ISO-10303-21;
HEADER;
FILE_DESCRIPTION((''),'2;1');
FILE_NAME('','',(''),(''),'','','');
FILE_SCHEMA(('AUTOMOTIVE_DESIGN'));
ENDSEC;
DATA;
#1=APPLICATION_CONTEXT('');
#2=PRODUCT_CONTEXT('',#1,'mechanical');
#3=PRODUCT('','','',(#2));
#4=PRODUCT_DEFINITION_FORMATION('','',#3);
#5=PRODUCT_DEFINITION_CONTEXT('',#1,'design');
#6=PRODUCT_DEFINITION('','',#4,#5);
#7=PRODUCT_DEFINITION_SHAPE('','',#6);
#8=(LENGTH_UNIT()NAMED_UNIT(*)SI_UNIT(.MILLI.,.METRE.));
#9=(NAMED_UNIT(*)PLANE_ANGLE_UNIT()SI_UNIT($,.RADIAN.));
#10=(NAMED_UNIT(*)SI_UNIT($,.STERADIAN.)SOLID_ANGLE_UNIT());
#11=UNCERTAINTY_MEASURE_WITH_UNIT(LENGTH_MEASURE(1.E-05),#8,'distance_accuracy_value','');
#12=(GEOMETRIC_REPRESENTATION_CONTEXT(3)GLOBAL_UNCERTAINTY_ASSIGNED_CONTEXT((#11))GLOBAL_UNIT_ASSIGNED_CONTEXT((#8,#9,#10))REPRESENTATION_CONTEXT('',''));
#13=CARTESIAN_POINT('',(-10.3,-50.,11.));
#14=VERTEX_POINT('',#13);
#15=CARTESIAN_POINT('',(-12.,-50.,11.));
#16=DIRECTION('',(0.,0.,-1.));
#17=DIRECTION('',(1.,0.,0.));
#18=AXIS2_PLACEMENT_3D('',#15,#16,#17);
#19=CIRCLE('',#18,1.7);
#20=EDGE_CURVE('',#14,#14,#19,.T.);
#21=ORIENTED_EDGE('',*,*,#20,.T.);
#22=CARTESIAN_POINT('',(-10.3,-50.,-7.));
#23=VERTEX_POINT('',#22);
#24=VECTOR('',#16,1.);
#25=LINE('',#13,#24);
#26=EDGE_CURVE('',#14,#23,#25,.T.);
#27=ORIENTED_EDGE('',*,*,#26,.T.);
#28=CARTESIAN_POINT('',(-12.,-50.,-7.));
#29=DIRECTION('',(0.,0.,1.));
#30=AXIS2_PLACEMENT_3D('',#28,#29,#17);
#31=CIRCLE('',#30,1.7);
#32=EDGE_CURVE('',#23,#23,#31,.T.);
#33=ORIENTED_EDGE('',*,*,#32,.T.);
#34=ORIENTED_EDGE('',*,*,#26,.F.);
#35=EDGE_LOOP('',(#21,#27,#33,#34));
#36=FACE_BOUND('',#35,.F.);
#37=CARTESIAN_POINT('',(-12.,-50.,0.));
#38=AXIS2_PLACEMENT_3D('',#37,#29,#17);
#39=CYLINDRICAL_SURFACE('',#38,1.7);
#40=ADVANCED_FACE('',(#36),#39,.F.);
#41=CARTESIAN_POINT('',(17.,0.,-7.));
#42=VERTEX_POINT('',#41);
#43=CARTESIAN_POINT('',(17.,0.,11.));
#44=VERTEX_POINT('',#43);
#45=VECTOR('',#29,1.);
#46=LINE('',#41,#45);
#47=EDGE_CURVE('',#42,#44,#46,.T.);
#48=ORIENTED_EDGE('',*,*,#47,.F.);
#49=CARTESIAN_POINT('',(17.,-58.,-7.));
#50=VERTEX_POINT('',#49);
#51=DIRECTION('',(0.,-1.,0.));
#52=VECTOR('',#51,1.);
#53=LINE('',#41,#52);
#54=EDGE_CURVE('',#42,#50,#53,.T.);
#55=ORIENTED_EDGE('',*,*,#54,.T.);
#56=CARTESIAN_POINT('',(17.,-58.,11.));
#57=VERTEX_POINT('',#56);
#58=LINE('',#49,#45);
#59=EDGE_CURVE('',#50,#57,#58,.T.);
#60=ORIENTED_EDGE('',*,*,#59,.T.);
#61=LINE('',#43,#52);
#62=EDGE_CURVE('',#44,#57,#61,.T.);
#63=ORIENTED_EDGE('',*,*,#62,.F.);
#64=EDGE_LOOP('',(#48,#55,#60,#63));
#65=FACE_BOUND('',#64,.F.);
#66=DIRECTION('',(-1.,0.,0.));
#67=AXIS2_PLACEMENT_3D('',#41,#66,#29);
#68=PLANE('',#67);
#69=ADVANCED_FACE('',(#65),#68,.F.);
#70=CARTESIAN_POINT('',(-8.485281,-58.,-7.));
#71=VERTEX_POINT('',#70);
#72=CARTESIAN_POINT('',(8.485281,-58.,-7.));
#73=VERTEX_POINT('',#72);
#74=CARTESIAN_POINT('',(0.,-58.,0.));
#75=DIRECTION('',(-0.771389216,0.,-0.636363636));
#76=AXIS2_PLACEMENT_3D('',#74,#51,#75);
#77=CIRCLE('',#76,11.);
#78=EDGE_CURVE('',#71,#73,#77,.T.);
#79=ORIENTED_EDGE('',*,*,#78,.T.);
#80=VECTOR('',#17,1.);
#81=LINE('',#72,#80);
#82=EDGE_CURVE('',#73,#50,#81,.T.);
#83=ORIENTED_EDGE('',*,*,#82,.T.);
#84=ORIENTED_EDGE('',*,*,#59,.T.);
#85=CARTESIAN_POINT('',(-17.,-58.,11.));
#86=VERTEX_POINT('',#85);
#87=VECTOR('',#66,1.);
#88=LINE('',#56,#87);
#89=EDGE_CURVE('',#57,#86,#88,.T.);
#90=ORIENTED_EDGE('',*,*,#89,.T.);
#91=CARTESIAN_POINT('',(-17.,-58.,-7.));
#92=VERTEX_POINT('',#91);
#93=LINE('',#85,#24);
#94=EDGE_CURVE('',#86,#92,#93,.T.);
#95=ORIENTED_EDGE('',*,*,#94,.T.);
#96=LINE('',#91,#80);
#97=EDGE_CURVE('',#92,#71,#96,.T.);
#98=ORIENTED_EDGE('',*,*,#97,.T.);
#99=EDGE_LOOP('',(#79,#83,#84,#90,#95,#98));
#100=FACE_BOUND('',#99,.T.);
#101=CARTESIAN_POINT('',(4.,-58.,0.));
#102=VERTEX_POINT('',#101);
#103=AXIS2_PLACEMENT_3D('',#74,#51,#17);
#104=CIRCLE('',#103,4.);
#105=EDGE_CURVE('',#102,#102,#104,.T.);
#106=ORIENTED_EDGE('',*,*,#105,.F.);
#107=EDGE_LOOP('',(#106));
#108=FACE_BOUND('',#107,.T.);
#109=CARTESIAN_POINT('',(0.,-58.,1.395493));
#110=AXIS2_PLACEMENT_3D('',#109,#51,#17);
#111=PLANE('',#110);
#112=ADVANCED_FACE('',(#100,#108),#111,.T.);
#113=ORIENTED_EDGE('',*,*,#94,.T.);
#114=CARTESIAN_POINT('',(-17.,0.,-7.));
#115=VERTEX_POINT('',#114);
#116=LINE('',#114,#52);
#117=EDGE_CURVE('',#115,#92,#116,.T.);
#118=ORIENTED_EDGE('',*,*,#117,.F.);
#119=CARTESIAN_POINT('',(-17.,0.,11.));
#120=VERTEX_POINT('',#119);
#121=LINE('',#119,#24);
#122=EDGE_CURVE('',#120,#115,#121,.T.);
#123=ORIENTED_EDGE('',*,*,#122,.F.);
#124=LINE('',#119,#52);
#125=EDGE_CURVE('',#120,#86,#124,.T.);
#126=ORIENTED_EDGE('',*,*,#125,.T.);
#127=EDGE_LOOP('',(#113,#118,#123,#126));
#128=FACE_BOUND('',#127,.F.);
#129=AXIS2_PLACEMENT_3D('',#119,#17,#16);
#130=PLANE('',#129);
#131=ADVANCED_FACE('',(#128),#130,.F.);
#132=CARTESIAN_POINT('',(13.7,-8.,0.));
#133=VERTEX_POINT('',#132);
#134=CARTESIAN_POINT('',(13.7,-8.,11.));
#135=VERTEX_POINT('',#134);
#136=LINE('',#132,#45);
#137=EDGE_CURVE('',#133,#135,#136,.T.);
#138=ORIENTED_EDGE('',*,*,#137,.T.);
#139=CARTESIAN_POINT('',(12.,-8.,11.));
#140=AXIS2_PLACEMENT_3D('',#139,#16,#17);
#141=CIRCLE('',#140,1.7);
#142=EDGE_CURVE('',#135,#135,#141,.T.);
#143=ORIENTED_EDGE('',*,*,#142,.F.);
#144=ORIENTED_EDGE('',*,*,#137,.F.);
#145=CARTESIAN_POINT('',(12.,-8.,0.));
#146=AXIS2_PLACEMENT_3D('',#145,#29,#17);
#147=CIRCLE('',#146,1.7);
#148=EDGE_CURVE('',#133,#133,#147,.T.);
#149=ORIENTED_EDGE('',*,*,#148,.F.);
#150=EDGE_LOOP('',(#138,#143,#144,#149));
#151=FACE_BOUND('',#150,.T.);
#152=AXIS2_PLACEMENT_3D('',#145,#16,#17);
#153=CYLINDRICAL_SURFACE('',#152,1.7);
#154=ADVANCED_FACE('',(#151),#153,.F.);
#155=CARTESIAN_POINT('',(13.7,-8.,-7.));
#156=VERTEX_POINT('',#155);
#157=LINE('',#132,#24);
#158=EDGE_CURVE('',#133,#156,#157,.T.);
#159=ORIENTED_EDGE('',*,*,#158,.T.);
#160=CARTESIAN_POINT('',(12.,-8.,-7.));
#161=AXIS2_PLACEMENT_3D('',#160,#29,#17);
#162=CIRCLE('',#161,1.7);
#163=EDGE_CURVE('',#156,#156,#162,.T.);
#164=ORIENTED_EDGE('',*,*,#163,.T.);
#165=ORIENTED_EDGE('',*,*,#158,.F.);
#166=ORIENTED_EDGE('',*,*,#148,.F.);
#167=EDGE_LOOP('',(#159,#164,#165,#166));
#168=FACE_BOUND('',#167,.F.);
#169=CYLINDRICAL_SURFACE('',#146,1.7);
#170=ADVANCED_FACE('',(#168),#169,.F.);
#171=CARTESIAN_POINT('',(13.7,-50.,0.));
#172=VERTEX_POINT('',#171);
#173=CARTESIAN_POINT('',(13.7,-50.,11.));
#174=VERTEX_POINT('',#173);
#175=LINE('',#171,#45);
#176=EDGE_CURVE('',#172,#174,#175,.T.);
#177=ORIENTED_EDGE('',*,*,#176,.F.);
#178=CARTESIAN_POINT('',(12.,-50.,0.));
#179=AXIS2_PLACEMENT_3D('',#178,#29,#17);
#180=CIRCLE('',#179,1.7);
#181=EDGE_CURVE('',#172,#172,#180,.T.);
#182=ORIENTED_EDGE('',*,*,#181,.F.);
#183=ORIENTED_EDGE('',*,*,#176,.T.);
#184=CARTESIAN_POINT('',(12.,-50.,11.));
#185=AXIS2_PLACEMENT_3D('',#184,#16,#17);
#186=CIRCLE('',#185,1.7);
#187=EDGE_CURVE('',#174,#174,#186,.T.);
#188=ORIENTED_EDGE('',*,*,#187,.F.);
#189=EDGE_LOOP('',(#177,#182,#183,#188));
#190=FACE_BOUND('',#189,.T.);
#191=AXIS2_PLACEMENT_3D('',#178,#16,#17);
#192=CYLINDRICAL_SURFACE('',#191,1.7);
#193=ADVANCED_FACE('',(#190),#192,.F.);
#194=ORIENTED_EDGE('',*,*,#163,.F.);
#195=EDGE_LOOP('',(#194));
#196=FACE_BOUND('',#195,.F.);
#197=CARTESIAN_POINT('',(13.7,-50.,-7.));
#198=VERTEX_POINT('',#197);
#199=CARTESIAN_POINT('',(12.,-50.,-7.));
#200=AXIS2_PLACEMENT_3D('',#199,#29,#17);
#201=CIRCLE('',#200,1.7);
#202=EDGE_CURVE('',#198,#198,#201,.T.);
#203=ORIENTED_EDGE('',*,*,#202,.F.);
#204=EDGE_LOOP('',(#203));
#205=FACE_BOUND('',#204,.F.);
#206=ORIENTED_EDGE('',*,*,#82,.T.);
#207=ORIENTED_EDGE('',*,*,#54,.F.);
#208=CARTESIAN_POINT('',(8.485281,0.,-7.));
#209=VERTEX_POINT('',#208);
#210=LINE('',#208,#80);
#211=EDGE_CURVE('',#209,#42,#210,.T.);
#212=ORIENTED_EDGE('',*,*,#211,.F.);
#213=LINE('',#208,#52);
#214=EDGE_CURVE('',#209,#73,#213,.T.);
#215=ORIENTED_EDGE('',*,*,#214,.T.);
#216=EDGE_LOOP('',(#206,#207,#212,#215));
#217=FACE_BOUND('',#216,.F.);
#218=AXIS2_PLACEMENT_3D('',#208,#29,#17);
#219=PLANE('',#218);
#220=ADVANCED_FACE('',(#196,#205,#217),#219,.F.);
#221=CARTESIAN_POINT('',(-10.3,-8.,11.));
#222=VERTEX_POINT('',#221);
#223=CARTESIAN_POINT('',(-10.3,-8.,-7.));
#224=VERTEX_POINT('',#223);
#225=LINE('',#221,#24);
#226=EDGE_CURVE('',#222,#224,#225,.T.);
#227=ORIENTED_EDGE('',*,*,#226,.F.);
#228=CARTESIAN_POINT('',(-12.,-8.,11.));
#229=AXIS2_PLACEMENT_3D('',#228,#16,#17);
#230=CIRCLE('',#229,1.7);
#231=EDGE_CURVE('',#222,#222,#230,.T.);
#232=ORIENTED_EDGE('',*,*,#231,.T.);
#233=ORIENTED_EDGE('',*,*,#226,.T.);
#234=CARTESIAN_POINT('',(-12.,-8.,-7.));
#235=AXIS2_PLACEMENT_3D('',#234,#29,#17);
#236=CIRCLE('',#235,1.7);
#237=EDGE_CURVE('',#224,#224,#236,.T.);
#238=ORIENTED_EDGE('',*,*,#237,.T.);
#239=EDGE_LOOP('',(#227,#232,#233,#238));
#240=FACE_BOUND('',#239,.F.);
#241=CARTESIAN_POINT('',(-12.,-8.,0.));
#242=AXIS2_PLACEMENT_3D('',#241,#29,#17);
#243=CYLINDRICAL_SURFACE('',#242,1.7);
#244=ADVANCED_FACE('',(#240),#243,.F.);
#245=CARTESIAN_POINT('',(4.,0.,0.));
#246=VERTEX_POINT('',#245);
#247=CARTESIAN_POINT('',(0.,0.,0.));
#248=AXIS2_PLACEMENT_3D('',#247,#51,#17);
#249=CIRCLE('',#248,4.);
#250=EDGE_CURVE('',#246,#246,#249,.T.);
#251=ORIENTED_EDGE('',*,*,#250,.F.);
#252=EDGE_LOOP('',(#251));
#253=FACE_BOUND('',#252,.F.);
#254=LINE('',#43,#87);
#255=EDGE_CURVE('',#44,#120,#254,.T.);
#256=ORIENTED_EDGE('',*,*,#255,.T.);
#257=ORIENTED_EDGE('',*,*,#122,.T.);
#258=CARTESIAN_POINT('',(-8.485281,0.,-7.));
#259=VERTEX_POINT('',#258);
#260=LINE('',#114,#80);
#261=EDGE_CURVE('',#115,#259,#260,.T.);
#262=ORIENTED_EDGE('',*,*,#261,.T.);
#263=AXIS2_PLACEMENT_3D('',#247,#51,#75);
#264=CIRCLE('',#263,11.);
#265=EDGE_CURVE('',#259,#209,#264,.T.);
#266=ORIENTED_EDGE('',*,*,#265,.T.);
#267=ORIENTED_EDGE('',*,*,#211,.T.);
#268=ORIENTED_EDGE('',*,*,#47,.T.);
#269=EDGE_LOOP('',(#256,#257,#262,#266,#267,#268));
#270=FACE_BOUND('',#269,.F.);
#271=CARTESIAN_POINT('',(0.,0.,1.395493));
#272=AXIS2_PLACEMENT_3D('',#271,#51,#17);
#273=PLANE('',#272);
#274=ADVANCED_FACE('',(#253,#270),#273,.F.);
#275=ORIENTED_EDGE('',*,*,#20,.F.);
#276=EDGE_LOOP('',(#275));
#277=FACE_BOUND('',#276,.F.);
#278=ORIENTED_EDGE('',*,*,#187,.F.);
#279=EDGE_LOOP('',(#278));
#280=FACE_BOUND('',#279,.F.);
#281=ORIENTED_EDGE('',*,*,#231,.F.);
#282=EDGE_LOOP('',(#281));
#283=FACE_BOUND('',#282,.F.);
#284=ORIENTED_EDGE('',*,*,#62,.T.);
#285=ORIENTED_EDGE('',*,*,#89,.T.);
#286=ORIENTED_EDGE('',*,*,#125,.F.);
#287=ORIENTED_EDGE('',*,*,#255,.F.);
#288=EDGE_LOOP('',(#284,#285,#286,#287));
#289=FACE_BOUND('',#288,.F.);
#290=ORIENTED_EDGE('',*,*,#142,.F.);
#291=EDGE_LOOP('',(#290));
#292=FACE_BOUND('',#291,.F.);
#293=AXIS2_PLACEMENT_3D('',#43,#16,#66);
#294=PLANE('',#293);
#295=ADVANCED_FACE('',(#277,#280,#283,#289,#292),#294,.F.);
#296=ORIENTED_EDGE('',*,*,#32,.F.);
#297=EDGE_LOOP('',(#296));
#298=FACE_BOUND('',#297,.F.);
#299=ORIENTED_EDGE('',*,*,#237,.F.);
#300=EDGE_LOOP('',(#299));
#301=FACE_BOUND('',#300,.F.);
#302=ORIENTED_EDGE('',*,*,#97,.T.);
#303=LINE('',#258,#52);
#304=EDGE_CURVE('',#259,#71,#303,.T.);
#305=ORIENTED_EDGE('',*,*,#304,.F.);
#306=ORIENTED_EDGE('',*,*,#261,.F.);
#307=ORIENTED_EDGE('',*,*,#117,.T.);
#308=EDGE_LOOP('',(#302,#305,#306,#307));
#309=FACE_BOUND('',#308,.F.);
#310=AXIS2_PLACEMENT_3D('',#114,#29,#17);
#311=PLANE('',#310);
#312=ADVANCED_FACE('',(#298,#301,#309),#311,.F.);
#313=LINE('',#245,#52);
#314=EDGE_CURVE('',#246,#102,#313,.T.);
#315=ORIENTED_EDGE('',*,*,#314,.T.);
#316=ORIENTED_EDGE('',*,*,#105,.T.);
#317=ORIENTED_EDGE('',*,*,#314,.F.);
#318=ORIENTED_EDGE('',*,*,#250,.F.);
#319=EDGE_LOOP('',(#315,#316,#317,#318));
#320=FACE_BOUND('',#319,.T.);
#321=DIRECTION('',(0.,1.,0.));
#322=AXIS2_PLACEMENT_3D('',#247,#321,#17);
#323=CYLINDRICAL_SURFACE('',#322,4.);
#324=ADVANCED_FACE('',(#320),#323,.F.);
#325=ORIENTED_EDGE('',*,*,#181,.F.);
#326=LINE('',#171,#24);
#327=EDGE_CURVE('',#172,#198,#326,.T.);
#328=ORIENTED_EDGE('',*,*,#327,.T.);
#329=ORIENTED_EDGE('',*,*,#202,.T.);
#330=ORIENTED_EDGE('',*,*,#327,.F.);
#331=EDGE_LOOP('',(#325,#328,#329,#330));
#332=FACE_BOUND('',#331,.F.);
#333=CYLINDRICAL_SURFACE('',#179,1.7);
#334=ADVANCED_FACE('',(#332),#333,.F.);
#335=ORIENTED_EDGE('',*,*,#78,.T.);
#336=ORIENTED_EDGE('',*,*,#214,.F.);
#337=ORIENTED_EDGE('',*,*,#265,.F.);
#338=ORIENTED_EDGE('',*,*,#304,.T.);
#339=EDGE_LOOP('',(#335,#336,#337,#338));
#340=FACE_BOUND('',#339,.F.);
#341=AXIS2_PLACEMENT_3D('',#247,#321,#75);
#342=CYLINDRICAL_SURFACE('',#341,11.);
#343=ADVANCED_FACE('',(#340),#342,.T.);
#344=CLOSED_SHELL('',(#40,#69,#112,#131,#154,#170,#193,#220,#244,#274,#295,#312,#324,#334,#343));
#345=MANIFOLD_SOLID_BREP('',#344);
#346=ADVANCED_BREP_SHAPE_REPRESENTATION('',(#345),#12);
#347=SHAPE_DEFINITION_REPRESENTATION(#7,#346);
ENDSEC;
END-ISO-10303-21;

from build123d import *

# Parameters (mm, degrees)
F0_R     = 4
F1_DEPTH = 58
F2_R     = 1.7
F3_DEPTH = 11.001
F4_DEPTH = 11.001
F5_DEPTH = 50


# Not quite as in the source:
# - a feature names something its author has since deleted; it is built from what else it names


with BuildPart() as f1:
    # F0 (on Front) → F1 (new body)
    with BuildSketch(Plane.XZ):
        with BuildLine():
            Line((-17, -7), (-8.4852813742, -7))
            ThreePointArc((-8.4852813742, -7), (0, -11), (8.4852813742, -7))
            Line((8.4852813742, -7), (17, -7))
            Line((17, -7), (17, 11))
            Line((17, 11), (-17, 11))
            Line((-17, 11), (-17, -7))
        make_face()
        Circle(F0_R, mode=Mode.SUBTRACT)
    extrude(amount=F1_DEPTH)

    # F2 (on Top) → F3 (cut, through all)
    with BuildSketch(Plane.XY):
        with Locations((-12, -8)):
            Circle(F2_R)
        with Locations((12, -8)):
            Circle(F2_R)
        with Locations((12, -50)):
            Circle(F2_R)
        with Locations((-12, -50)):
            Circle(F2_R)
    extrude(amount=-F3_DEPTH, mode=Mode.SUBTRACT)

    # F2 (on Top) → F4 (cut, through all)
    with BuildSketch(Plane.XY):
        with Locations((-12, -8)):
            Circle(F2_R)
        with Locations((12, -8)):
            Circle(F2_R)
        with Locations((12, -50)):
            Circle(F2_R)
        with Locations((-12, -50)):
            Circle(F2_R)
    extrude(amount=-F4_DEPTH, mode=Mode.SUBTRACT)

    # F2 (on Top) → F5 (cut)
    with BuildSketch(Plane.XY):
        with Locations((-12, -8)):
            Circle(F2_R)
        with Locations((12, -8)):
            Circle(F2_R)
        with Locations((12, -50)):
            Circle(F2_R)
        with Locations((-12, -50)):
            Circle(F2_R)
    extrude(amount=F5_DEPTH, mode=Mode.SUBTRACT)


solid = f1.part
